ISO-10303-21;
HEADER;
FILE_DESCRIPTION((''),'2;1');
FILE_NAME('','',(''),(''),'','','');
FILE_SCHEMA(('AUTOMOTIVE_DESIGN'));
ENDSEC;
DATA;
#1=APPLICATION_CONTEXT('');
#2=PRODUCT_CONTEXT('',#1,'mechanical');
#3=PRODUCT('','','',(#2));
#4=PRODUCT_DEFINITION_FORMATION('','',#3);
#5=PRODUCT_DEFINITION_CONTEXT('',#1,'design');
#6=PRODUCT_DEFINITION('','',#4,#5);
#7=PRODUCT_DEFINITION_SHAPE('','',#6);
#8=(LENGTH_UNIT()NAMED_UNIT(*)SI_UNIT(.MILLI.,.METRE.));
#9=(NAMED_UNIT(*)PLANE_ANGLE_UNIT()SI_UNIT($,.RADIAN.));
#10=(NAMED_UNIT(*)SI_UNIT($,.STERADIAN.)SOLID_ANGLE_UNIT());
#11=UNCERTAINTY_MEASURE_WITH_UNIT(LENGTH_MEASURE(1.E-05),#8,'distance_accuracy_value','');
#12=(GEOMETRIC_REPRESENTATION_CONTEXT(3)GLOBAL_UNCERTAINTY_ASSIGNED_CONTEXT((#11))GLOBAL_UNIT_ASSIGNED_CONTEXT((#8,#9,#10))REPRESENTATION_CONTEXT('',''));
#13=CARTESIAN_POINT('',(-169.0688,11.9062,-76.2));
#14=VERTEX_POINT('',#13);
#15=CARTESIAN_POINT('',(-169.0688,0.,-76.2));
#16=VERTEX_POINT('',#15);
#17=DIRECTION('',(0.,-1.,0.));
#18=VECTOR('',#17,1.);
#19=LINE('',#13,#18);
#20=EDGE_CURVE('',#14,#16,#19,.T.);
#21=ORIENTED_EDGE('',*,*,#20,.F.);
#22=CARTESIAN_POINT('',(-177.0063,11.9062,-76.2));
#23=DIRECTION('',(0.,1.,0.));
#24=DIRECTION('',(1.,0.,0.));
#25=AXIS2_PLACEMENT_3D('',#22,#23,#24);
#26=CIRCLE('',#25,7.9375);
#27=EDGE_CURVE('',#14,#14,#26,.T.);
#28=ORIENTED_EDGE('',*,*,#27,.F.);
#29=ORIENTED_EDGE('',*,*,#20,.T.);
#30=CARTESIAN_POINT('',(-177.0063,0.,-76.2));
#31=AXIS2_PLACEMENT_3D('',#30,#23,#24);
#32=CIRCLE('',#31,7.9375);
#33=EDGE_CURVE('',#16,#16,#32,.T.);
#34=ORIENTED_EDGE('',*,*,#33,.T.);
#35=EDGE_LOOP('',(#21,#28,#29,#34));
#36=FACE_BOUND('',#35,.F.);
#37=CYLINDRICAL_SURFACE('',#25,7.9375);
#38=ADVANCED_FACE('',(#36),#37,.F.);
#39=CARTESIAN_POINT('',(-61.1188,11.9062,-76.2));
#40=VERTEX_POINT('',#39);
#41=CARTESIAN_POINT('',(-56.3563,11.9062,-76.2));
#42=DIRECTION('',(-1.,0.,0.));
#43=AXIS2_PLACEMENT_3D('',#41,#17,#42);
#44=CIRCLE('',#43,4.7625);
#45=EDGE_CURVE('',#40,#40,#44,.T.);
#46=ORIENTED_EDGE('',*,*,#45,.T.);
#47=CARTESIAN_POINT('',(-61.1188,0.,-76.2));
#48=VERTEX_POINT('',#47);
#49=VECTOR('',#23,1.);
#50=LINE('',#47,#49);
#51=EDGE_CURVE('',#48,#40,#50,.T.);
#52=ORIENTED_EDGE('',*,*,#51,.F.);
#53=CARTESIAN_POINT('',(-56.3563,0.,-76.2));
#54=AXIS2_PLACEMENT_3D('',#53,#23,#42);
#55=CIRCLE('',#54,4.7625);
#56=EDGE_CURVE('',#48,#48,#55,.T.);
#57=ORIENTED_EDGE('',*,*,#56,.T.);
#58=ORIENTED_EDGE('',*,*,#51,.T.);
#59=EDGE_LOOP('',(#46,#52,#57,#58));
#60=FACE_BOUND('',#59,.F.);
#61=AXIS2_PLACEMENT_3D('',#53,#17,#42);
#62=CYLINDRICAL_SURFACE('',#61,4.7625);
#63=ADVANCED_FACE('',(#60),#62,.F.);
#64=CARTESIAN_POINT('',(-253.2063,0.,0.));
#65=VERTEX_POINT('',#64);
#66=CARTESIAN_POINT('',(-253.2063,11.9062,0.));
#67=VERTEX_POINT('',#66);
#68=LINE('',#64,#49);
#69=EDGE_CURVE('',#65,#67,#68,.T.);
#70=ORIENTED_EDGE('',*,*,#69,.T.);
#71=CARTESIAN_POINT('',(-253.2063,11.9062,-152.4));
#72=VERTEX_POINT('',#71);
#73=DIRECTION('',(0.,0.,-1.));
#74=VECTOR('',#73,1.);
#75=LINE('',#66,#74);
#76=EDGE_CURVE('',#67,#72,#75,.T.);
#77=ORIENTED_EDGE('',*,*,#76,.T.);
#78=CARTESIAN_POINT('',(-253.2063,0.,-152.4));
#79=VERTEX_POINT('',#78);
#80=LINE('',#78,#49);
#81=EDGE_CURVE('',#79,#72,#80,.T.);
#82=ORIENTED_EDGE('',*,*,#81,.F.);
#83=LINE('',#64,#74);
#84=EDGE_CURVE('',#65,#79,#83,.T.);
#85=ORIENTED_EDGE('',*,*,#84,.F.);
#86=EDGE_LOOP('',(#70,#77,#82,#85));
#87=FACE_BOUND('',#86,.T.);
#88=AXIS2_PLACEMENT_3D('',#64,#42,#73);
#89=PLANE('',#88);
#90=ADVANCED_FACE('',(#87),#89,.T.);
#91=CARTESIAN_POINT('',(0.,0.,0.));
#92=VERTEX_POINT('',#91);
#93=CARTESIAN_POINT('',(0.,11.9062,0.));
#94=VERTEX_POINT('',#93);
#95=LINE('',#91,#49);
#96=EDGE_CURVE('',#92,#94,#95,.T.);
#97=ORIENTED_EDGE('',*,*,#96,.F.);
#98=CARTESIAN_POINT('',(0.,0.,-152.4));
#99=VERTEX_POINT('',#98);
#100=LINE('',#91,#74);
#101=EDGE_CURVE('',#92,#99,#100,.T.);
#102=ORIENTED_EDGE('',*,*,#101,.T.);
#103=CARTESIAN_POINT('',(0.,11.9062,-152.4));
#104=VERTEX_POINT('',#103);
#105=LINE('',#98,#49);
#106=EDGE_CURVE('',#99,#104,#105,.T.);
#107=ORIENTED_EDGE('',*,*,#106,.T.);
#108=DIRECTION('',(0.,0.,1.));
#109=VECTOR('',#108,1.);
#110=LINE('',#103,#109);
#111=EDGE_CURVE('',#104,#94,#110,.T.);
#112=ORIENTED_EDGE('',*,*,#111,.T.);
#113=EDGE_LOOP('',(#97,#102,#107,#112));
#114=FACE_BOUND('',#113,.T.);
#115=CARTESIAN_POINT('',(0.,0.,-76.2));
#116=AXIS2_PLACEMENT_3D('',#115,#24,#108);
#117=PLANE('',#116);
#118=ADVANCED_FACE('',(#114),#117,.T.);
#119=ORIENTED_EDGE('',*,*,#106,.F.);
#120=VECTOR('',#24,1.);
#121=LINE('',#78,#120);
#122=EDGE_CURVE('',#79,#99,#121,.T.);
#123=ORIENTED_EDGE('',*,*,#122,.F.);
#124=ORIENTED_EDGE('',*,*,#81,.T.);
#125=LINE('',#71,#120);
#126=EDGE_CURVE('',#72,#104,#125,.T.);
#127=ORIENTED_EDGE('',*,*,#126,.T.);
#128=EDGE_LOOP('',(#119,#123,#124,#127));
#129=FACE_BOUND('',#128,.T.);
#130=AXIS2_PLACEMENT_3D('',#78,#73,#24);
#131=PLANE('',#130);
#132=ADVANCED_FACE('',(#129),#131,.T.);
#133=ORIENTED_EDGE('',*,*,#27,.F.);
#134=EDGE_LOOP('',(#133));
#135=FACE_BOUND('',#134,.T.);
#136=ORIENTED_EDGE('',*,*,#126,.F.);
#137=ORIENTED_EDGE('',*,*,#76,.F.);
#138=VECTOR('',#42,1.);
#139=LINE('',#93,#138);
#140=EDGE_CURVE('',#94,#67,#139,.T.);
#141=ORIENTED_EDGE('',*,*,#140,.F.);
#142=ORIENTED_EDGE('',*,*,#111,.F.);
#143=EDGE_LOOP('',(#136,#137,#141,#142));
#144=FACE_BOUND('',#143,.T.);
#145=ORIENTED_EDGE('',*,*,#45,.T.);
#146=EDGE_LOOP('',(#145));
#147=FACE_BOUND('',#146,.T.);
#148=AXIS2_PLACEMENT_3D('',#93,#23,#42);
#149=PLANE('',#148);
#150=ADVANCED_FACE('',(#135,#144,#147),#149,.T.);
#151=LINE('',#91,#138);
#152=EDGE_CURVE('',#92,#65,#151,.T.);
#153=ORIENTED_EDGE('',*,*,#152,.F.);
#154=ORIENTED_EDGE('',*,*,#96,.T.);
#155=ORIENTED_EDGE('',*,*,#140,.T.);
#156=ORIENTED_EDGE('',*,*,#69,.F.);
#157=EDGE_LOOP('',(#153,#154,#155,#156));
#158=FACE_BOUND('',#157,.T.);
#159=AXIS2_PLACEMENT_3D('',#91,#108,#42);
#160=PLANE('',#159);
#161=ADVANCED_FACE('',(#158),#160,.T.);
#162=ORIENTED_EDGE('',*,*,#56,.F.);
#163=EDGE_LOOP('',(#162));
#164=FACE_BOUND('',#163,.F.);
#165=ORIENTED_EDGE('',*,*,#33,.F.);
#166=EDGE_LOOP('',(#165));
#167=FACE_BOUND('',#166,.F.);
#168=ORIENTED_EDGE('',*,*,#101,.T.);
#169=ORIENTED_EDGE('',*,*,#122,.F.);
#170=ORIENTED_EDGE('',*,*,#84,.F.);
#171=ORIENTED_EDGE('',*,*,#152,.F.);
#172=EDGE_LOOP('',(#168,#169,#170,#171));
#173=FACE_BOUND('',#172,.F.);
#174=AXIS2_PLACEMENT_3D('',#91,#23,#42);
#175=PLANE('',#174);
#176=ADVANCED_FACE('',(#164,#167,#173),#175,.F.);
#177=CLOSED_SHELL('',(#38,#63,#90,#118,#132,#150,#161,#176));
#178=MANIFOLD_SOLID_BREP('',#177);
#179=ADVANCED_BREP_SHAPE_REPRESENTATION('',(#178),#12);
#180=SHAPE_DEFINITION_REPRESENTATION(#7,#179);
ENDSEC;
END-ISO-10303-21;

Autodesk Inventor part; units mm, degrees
ref_plane "YZ Plane" through (0, 0, 0) normal (1, 0, 0) x (0, 1, 0)
ref_plane "XZ Plane" through (0, 0, 0) normal (0, 1, 0) x (-1, 0, 0)
ref_plane "XY Plane" through (0, 0, 0) normal (0, 0, 1) x (1, 0, 0)
sketch "Sketch1" plane through (0, 0, 0) normal (0, 1, 0) x (-1, 0, 0)
  line L0 (0, 0) -> (253.2063, 0)
  line L1 (253.2063, 0) -> (253.2063, -152.4)
  line L2 (253.2063, -152.4) -> (0, -152.4)
  line L3 (0, -152.4) -> (0, 0)
  line L4 (0, -76.2) -> (56.3563, -76.2)
  circle A0 centre (56.3563, -76.2) radius 4.7625
  dimension "d0" = 152.4
  dimension "d1" = 253.2063
  dimension "d2" = 56.3563
  dimension "d3" = 9.525
extrude "Extrusion1" add sketch "Sketch1" along normal blind 11.9062
sketch "Sketch2" plane through (0, 11.9062, 0) normal (0, 1, 0) x (1, 0, 0)
  line L0 (0, 0) -> (0, 152.4) projected
  line L1 (0, 76.2) -> (-177.0063, 76.2)
  circle A0 centre (-177.0063, 76.2) radius 7.9375
  dimension "d6" = 177.0062
  dimension "d7" = 15.875
extrude "Extrusion2" cut sketch "Sketch2" against normal blind 11.9062
properties part number "Stage1Wall" material "Wood (Birch)"
